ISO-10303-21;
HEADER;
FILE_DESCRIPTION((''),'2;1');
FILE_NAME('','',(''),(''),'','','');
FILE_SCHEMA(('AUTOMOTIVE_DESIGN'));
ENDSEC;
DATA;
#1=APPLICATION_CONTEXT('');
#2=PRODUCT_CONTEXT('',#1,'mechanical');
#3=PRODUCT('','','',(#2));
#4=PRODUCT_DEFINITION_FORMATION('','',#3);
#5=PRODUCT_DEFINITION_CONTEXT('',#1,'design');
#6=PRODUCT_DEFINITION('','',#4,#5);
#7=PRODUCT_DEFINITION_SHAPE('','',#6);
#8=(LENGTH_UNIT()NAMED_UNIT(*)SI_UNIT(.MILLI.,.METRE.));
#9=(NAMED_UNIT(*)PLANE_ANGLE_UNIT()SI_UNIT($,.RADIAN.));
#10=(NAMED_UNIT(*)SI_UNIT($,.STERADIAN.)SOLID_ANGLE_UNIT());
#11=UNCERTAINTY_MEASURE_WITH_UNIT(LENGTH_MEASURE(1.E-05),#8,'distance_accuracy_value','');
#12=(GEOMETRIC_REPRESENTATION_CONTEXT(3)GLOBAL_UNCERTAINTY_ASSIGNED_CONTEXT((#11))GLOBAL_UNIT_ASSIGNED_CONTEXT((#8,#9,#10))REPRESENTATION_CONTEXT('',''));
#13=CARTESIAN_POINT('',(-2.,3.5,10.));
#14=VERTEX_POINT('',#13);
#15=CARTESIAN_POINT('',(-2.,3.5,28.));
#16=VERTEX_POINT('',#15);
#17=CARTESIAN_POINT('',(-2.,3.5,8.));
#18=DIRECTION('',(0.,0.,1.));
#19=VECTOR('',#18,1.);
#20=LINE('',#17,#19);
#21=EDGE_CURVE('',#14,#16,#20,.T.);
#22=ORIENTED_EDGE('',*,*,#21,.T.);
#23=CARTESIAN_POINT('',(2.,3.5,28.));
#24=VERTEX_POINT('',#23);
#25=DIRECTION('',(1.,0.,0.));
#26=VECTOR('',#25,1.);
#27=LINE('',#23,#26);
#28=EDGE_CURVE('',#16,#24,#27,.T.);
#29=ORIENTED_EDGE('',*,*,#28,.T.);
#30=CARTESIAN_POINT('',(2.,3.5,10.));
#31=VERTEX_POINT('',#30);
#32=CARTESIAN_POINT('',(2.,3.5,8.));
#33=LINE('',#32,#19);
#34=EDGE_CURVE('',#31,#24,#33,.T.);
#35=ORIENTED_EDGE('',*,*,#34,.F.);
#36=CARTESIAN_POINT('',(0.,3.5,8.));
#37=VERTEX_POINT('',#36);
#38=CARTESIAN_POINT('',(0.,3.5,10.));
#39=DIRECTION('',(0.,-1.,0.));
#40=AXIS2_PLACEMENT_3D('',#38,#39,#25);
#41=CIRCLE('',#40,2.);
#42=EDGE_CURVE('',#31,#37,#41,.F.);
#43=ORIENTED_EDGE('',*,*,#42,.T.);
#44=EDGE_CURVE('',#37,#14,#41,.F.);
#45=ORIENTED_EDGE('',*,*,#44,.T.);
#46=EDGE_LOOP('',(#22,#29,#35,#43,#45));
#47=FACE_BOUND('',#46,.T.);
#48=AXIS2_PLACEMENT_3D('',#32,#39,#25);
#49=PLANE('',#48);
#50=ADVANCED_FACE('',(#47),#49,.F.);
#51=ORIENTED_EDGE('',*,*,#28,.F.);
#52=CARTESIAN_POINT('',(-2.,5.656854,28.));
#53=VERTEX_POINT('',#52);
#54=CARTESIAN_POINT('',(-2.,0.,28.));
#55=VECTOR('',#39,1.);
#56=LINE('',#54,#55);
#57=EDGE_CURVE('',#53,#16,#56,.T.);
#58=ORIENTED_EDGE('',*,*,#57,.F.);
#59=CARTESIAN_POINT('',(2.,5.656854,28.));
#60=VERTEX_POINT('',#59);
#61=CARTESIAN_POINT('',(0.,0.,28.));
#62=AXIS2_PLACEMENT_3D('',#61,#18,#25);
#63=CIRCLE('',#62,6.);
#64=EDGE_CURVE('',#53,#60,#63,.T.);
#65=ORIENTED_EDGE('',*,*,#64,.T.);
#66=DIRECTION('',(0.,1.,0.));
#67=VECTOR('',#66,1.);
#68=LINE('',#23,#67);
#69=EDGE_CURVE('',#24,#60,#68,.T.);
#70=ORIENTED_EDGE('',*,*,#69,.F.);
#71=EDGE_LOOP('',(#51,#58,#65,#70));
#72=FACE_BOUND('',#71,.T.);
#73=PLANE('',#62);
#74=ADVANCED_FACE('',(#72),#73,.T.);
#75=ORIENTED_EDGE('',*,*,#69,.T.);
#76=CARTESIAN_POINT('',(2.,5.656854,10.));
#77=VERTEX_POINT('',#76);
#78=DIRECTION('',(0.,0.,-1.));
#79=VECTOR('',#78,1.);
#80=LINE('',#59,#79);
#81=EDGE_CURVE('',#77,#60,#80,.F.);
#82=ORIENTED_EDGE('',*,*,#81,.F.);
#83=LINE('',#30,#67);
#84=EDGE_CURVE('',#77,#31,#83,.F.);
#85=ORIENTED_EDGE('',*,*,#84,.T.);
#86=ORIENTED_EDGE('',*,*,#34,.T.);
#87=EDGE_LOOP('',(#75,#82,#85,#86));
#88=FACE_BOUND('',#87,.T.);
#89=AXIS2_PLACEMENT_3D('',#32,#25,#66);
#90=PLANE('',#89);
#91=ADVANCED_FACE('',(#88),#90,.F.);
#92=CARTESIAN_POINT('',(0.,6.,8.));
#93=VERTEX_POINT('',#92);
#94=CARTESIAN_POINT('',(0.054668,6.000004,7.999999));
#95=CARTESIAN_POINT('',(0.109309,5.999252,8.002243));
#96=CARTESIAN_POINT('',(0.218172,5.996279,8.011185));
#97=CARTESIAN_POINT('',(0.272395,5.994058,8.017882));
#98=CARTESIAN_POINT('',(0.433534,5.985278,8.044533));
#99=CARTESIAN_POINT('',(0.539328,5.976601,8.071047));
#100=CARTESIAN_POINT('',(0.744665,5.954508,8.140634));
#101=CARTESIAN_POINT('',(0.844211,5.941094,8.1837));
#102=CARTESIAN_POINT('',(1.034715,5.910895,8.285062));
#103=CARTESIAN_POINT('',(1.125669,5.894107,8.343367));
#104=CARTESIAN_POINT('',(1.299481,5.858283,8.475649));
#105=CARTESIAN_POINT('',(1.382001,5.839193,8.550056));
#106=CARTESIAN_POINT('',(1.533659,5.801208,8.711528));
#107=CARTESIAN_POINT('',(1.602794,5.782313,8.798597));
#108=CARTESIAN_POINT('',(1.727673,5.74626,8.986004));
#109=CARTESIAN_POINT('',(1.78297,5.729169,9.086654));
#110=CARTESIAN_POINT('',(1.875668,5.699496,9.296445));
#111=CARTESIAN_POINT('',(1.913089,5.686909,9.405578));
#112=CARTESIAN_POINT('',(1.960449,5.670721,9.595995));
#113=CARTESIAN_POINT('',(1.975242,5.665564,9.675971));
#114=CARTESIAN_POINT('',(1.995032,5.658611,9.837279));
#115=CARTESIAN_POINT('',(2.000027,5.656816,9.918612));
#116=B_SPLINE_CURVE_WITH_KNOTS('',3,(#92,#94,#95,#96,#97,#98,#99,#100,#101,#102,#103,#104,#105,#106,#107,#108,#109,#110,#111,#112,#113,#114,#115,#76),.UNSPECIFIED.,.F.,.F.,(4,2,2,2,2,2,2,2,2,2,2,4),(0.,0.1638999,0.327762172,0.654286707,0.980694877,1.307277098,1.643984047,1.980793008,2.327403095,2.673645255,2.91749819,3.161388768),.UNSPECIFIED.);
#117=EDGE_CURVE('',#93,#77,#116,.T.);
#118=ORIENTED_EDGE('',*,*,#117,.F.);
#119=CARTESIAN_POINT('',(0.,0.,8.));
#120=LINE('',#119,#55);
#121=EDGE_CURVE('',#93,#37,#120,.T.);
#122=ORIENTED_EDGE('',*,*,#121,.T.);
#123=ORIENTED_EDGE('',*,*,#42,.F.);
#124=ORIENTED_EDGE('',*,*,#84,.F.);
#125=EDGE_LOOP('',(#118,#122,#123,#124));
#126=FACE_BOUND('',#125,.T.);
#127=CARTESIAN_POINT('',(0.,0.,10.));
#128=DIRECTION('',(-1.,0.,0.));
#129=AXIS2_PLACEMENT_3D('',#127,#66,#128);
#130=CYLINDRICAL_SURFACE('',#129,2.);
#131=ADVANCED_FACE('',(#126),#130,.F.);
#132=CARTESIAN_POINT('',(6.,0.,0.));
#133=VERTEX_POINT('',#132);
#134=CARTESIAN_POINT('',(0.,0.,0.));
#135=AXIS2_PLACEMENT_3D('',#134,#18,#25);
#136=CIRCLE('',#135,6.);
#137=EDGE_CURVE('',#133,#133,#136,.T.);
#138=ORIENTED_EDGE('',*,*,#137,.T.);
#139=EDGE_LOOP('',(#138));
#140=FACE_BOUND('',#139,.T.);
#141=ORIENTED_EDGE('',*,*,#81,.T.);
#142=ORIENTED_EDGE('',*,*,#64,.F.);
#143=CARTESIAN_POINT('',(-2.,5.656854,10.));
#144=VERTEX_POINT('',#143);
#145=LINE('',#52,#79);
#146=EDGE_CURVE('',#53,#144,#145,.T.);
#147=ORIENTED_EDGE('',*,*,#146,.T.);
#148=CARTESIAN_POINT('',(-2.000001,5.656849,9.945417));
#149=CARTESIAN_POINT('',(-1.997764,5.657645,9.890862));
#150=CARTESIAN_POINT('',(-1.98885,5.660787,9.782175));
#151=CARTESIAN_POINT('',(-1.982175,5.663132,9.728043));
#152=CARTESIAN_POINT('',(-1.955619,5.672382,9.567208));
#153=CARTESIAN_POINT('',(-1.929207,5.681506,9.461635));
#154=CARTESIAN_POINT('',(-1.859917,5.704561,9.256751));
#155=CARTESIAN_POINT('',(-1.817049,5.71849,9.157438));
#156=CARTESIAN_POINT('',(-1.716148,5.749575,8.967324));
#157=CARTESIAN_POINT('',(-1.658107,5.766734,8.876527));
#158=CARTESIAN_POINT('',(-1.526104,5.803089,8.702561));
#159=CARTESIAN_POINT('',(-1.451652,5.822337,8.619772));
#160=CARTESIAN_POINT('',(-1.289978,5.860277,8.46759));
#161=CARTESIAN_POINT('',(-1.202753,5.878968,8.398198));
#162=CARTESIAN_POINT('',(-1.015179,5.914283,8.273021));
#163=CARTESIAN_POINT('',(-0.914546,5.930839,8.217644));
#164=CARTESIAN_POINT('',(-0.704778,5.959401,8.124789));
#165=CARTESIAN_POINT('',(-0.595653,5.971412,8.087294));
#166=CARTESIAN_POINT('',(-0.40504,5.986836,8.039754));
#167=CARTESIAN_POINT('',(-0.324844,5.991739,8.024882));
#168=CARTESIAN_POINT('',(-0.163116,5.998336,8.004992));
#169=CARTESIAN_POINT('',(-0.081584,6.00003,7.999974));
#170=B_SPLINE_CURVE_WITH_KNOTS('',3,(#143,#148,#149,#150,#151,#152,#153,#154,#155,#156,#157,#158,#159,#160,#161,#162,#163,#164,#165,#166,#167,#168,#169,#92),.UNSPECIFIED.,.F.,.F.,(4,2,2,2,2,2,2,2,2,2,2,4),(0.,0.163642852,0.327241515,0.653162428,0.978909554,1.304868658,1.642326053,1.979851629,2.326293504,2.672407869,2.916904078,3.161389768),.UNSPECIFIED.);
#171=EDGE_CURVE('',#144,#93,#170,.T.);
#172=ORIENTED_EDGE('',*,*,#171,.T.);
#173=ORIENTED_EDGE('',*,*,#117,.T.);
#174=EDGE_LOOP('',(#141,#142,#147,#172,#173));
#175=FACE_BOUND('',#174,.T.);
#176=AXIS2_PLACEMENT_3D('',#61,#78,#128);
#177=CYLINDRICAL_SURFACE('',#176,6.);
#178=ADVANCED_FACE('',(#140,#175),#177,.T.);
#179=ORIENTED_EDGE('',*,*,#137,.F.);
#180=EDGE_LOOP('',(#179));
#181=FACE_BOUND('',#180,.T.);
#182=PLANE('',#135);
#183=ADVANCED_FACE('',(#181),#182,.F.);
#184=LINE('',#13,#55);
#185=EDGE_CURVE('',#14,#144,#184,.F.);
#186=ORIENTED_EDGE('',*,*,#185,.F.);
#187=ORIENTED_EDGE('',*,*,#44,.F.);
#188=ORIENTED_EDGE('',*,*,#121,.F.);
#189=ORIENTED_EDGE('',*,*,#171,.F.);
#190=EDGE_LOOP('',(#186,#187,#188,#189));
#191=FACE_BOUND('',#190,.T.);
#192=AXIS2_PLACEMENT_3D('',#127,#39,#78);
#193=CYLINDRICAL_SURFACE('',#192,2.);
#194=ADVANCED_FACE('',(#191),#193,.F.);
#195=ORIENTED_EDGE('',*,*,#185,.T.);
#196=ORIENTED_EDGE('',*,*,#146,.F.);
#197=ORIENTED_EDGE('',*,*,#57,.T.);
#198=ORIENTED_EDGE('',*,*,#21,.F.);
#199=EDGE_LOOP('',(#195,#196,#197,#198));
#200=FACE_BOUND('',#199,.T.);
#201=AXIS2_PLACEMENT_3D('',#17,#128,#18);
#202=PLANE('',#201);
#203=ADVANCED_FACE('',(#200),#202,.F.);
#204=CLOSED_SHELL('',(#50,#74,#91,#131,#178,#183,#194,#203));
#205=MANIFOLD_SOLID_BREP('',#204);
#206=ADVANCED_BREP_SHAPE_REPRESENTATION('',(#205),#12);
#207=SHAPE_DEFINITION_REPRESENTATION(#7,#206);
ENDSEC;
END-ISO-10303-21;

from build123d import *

# Parameters (mm, degrees)
SKETCH1_R           = 6
BOSS_EXTRUDE1_DEPTH = 28
SKETCH2_W           = 4
SKETCH2_H           = 2.5
CUT_EXTRUDE1_DEPTH  = 20
FILLET2_R           = 2
FILLET3_R           = 2


with BuildPart() as part:
    # Sketch1 → Boss-Extrude1 (new body)
    with BuildSketch(Plane.XY):
        Circle(SKETCH1_R)
    extrude(amount=BOSS_EXTRUDE1_DEPTH)

    # Sketch2 → Cut-Extrude1 (cut)
    with BuildSketch(Plane.XY.offset(28)):
        with Locations((0, 4.75)):
            Rectangle(SKETCH2_W, SKETCH2_H)
    extrude(amount=-CUT_EXTRUDE1_DEPTH, mode=Mode.SUBTRACT)

    # Fillet2
    fillet2_edges = [part.edges().sort_by_distance(p)[0] for p in [
        (-2, 4.578427125, 8),
    ]]
    fillet(fillet2_edges, radius=FILLET2_R)

    # Fillet3
    fillet3_edges = [part.edges().sort_by_distance(p)[0] for p in [
        (2, 4.578427125, 8),
    ]]
    fillet(fillet3_edges, radius=FILLET3_R - 0.0001)  # a hair under: the kernel refuses the full size


solid = part.part
